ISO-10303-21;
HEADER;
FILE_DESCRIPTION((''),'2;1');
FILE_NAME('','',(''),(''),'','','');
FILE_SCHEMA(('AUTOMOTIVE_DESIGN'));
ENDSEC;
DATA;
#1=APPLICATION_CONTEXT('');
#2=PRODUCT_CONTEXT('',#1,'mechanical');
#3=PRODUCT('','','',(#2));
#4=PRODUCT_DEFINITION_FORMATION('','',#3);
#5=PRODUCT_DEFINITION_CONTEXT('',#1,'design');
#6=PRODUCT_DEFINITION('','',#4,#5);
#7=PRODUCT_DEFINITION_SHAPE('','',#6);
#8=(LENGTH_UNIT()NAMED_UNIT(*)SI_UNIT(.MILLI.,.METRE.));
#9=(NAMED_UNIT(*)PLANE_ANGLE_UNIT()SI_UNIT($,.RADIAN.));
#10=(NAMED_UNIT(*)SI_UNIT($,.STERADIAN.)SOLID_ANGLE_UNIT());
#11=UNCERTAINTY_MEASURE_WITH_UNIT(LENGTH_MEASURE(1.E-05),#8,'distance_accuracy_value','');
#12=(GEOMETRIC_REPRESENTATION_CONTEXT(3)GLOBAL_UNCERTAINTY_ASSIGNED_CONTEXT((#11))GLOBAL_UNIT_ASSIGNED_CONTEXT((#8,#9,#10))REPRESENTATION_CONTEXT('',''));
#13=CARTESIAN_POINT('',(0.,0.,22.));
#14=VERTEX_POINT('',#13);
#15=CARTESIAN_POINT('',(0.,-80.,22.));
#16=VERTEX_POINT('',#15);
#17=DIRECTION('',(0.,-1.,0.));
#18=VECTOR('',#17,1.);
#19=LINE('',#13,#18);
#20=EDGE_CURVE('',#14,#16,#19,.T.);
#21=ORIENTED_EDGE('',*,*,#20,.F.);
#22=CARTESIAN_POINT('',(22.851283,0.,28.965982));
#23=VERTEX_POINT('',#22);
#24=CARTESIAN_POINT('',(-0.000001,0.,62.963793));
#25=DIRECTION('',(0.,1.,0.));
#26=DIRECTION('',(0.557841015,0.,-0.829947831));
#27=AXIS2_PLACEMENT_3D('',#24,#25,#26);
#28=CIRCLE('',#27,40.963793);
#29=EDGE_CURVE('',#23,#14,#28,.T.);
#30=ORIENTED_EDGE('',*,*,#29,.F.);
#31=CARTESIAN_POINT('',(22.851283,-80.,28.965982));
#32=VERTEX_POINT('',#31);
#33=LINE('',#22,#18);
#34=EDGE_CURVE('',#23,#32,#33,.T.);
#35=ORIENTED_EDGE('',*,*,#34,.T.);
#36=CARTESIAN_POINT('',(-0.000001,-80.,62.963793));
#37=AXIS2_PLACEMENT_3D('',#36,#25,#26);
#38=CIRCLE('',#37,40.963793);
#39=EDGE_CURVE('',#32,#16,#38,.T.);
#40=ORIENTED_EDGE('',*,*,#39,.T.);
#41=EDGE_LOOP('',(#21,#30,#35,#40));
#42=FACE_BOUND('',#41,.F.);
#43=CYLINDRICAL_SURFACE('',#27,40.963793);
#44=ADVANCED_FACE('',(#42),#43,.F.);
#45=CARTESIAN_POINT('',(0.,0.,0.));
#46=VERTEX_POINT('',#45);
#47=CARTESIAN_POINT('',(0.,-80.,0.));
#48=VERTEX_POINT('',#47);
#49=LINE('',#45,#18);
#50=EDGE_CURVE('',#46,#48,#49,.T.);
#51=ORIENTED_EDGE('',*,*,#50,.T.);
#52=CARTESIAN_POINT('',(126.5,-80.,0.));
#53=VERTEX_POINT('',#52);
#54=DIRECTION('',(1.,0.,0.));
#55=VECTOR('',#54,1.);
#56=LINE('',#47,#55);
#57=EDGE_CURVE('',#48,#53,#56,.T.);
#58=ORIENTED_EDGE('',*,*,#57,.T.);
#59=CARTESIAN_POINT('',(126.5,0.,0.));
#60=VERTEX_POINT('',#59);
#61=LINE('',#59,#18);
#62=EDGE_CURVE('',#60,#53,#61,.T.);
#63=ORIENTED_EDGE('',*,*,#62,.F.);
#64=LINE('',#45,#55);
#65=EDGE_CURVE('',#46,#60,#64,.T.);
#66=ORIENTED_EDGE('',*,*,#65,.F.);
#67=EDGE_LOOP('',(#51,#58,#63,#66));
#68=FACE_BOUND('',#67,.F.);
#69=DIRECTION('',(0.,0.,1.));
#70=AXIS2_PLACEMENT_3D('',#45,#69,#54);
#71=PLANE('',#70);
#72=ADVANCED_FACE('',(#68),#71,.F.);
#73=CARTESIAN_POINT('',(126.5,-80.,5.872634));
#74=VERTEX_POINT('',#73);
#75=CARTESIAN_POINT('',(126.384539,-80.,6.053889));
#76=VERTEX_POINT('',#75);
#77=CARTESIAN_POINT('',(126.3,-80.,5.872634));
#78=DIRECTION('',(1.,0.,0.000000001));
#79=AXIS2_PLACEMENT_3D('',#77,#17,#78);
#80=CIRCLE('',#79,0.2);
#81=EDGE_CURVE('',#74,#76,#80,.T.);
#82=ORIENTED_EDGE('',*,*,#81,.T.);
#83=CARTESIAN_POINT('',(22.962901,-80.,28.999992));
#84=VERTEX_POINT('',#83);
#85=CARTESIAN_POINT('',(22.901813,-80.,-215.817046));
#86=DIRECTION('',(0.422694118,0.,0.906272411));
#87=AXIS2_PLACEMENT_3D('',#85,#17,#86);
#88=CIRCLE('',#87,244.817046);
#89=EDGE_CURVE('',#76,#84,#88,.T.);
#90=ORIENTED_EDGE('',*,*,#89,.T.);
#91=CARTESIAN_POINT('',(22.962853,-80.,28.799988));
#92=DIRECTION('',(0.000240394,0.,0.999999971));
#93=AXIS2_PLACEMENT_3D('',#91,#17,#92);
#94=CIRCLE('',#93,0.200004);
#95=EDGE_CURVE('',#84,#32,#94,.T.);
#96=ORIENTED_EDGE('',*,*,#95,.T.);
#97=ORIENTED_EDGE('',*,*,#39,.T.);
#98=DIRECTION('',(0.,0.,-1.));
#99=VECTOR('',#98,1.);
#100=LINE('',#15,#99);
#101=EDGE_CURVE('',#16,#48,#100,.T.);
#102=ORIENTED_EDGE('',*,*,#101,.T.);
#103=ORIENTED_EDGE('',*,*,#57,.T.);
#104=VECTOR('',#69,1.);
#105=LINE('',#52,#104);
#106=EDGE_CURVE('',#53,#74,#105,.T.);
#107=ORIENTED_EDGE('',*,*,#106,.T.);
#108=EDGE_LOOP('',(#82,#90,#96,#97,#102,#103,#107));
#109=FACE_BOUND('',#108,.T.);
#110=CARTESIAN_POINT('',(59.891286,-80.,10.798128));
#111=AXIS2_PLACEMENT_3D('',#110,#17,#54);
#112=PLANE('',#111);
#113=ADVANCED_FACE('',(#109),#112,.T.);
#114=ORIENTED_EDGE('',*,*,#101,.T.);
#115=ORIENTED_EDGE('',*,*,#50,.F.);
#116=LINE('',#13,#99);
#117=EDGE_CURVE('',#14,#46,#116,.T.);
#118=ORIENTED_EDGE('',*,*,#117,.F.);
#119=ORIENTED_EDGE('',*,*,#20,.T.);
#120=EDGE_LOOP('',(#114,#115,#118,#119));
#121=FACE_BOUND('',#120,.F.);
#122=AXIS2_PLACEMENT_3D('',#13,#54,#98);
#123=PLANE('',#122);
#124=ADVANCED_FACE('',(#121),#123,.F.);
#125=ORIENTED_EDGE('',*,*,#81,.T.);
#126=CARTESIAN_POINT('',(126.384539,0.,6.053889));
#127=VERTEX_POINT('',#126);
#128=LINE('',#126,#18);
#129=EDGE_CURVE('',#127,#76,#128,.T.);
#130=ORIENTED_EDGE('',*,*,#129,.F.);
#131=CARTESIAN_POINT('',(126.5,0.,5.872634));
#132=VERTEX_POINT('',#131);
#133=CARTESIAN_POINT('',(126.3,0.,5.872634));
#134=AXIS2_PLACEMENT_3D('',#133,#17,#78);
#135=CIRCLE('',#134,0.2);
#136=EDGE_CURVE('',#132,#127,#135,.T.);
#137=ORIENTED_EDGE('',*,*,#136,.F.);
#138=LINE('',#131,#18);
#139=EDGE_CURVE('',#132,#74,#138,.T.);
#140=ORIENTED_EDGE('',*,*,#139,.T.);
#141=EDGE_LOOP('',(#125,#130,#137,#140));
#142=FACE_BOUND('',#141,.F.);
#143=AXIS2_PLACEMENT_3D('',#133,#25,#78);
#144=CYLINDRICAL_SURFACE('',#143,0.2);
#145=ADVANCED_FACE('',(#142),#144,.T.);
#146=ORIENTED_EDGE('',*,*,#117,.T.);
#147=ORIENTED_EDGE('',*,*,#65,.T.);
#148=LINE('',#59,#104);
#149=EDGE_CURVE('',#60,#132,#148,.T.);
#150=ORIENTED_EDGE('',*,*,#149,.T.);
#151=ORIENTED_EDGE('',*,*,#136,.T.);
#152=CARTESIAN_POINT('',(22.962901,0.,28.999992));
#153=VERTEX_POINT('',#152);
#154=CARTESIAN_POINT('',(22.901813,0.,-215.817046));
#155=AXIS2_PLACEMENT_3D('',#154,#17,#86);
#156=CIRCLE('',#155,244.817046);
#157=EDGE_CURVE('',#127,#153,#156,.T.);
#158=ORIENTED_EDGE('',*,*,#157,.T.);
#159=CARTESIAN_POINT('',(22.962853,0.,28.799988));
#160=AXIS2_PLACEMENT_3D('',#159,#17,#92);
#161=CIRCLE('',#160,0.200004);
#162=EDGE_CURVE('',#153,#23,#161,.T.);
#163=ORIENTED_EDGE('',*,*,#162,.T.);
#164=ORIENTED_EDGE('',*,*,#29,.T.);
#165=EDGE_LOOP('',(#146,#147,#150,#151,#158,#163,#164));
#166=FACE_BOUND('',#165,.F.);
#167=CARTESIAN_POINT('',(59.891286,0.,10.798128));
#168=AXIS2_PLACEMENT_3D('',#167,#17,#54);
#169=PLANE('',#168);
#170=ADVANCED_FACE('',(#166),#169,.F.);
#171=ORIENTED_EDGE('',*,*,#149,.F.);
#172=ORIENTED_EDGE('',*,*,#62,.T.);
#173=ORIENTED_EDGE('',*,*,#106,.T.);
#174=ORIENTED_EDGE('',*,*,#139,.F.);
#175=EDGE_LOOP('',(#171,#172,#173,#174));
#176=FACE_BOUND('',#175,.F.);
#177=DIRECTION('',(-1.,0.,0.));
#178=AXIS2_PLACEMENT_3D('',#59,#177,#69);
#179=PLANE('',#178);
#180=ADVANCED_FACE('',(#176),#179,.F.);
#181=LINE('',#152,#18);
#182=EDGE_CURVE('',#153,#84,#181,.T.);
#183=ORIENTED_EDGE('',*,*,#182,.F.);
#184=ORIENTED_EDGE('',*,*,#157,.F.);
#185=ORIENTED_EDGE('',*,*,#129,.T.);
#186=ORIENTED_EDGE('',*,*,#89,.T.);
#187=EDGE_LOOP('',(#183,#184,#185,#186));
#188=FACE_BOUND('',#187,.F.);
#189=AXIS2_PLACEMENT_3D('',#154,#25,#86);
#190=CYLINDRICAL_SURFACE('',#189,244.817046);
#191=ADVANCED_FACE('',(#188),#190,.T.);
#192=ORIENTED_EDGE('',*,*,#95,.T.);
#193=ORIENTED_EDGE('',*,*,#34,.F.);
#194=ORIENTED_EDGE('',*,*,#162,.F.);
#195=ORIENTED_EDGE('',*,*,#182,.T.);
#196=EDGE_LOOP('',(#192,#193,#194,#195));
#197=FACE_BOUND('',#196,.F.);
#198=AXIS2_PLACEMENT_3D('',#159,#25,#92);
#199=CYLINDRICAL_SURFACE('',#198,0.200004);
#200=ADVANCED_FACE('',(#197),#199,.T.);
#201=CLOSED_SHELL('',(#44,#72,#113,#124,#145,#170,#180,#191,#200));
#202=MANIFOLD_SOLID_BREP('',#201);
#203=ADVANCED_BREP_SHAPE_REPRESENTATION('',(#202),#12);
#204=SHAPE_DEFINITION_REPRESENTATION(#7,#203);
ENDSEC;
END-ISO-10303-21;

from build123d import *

# Parameters (mm, degrees)
F1_DEPTH = 80


# Not quite as in the source:
# - ends of sketch curves that miss each other by under 0.0002 mm in the source are joined


with BuildPart() as f1:
    # F0 (on Front) → F1 (new body)
    with BuildSketch(Plane.XZ):
        with BuildLine():
            Line((0, 20), (0, 0))
            Line((0, 0), (126.5, 0))
            Line((126.5, 0), (126.5, 5.872634))
            ThreePointArc((126.5, 5.872634), (126.4686827703, 5.9800868873), (126.3845387701, 6.0538885071))
            ThreePointArc((126.3845387701, 6.0538885071), (75.9297421053, 23.1880267358), (22.962901, 28.9999923785))
            ThreePointArc((22.962901, 28.9999923785), (22.9045566452, 28.9913078859), (22.8512831377, 28.9659817952))
            ThreePointArc((22.8512831377, 28.9659817952), (11.9447272771, 23.7801763601), (0, 22))
            Line((0, 22), (0, 20))
        make_face()
    extrude(amount=F1_DEPTH)


solid = f1.part
